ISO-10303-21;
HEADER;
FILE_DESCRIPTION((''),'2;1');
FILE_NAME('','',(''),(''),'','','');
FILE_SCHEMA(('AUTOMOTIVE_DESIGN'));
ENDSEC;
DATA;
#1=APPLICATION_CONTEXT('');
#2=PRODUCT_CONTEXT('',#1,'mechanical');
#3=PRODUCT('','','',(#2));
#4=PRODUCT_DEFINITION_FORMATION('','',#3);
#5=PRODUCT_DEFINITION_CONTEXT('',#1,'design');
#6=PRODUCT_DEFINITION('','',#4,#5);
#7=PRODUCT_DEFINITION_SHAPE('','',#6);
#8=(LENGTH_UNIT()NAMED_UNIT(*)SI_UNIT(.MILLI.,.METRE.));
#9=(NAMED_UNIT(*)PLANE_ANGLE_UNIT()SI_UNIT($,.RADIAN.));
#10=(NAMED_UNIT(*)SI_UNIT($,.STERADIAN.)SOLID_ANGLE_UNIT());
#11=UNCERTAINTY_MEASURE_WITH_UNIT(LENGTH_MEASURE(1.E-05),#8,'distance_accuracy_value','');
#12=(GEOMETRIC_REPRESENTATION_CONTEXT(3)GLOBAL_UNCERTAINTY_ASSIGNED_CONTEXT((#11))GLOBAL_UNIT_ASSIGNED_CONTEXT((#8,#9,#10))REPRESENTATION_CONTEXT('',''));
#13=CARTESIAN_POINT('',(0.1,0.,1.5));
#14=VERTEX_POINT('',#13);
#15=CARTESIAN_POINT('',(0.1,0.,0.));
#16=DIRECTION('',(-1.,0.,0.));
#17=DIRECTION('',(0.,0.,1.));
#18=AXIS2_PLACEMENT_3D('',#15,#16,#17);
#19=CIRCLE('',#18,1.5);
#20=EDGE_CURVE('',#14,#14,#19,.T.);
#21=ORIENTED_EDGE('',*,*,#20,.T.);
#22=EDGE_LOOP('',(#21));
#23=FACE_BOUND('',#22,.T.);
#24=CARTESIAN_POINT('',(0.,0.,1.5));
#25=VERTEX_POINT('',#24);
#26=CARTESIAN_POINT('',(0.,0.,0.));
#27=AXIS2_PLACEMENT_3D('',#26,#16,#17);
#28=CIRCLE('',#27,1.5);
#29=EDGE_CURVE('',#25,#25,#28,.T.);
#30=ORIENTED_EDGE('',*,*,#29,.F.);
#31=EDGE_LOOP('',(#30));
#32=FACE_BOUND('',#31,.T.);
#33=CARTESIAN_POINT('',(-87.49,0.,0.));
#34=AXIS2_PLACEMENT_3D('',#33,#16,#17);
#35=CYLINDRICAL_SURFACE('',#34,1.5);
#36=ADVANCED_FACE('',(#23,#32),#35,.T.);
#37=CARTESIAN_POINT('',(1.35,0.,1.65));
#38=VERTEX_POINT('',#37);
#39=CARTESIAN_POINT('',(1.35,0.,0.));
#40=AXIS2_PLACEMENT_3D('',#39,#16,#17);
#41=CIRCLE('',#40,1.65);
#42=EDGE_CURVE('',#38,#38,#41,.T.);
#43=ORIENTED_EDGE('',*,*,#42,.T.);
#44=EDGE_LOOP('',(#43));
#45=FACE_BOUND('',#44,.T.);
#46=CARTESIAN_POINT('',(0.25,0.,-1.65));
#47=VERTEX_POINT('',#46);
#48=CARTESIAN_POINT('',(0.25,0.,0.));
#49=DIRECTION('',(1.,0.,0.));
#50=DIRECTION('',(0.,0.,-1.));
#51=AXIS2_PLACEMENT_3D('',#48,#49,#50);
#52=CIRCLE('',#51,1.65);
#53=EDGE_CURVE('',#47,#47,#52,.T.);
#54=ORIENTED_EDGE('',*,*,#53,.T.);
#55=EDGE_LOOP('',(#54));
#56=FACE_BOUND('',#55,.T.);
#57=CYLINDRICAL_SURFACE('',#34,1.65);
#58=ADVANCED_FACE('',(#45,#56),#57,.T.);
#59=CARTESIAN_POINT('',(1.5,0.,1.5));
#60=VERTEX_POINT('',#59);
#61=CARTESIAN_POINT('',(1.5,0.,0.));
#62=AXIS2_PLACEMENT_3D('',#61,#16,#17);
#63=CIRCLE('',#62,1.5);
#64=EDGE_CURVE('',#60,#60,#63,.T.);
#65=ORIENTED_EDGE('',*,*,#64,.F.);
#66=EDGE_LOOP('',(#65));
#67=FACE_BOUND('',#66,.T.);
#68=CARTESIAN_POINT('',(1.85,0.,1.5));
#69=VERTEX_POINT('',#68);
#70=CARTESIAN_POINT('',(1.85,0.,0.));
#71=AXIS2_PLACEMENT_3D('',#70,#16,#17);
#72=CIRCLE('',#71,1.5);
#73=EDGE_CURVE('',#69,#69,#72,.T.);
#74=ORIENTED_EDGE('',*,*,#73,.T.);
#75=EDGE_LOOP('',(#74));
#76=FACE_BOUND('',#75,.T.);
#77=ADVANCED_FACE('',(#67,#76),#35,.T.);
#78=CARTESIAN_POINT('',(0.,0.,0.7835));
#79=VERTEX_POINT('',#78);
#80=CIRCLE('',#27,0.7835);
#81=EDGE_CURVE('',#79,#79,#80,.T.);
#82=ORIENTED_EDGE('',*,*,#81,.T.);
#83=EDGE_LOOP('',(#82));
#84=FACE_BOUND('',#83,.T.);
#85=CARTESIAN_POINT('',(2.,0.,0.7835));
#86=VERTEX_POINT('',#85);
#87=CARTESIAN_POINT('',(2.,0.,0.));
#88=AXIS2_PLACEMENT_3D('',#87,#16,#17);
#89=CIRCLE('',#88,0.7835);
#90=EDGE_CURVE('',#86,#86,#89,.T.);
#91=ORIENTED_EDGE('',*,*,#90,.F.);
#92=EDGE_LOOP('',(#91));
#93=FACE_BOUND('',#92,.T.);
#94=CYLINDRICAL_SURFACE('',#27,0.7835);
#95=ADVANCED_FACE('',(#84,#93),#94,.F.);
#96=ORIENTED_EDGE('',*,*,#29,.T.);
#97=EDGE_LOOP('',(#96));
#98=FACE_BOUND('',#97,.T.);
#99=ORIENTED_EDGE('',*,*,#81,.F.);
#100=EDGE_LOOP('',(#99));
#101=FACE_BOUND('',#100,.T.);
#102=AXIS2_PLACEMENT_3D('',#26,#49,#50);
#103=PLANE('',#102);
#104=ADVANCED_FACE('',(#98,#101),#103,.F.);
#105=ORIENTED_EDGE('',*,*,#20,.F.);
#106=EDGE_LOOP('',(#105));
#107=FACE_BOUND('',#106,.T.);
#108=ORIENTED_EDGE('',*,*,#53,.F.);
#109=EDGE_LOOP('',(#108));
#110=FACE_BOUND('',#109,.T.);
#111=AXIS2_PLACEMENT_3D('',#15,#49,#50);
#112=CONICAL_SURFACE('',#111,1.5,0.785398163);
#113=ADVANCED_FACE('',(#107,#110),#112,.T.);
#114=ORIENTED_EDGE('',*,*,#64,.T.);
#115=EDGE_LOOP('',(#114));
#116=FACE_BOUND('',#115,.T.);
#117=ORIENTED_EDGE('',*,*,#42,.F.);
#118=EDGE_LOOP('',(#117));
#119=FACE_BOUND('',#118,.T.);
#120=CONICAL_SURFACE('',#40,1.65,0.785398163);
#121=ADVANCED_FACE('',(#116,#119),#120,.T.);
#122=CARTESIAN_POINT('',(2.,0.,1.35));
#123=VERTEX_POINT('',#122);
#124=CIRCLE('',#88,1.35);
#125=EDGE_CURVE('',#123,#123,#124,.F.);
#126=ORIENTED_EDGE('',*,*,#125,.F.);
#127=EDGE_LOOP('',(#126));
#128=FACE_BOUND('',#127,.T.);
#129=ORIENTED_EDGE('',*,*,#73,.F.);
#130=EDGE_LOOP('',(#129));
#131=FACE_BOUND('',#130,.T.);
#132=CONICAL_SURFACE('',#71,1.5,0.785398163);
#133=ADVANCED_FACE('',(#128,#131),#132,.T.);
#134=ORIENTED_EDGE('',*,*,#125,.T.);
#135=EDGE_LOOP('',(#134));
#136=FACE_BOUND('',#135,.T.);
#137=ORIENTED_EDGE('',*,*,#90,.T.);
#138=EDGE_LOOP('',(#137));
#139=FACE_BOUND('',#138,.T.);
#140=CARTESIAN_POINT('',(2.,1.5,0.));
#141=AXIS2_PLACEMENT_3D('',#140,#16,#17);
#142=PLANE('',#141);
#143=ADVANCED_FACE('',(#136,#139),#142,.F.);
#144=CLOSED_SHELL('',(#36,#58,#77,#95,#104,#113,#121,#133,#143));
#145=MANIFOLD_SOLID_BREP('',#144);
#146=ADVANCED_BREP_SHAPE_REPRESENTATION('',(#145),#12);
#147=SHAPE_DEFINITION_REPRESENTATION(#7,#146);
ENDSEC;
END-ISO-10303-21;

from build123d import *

# Parameters (mm, degrees)
TAP1_D        = 1.567
CHAMFER1_SIZE = 0.15


with BuildPart() as part:
    # Sketch1 → Revolve1 (revolve)
    with BuildSketch(Plane.XY, mode=Mode.PRIVATE) as revolve1_sk:
        Polygon((0, 0), (0, 1.5), (0.1, 1.5), (0.1, 1.65), (1.5, 1.65), (1.5, 1.5), (2, 1.5), (2, 0), align=None)
    revolve(revolve1_sk.sketch.rotate(Axis((-87.49, 0, 0), (1, 0, 0)), 90), axis=Axis((-87.49, 0, 0), (1, 0, 0)))

    # Tap1 (through all)
    with Locations(Plane.ZY):
        with Locations((0, 0)):
            Hole(TAP1_D / 2)

    # Chamfer1
    chamfer1_edges = [part.edges().sort_by_distance(p)[0] for p in [
        (2, 0, -1.5),
        (1.5, 0, -1.65),
        (0.1, 0, -1.65),
    ]]
    chamfer(chamfer1_edges, length=CHAMFER1_SIZE - 0.0001)  # a hair under: the kernel refuses the full size


solid = part.part
